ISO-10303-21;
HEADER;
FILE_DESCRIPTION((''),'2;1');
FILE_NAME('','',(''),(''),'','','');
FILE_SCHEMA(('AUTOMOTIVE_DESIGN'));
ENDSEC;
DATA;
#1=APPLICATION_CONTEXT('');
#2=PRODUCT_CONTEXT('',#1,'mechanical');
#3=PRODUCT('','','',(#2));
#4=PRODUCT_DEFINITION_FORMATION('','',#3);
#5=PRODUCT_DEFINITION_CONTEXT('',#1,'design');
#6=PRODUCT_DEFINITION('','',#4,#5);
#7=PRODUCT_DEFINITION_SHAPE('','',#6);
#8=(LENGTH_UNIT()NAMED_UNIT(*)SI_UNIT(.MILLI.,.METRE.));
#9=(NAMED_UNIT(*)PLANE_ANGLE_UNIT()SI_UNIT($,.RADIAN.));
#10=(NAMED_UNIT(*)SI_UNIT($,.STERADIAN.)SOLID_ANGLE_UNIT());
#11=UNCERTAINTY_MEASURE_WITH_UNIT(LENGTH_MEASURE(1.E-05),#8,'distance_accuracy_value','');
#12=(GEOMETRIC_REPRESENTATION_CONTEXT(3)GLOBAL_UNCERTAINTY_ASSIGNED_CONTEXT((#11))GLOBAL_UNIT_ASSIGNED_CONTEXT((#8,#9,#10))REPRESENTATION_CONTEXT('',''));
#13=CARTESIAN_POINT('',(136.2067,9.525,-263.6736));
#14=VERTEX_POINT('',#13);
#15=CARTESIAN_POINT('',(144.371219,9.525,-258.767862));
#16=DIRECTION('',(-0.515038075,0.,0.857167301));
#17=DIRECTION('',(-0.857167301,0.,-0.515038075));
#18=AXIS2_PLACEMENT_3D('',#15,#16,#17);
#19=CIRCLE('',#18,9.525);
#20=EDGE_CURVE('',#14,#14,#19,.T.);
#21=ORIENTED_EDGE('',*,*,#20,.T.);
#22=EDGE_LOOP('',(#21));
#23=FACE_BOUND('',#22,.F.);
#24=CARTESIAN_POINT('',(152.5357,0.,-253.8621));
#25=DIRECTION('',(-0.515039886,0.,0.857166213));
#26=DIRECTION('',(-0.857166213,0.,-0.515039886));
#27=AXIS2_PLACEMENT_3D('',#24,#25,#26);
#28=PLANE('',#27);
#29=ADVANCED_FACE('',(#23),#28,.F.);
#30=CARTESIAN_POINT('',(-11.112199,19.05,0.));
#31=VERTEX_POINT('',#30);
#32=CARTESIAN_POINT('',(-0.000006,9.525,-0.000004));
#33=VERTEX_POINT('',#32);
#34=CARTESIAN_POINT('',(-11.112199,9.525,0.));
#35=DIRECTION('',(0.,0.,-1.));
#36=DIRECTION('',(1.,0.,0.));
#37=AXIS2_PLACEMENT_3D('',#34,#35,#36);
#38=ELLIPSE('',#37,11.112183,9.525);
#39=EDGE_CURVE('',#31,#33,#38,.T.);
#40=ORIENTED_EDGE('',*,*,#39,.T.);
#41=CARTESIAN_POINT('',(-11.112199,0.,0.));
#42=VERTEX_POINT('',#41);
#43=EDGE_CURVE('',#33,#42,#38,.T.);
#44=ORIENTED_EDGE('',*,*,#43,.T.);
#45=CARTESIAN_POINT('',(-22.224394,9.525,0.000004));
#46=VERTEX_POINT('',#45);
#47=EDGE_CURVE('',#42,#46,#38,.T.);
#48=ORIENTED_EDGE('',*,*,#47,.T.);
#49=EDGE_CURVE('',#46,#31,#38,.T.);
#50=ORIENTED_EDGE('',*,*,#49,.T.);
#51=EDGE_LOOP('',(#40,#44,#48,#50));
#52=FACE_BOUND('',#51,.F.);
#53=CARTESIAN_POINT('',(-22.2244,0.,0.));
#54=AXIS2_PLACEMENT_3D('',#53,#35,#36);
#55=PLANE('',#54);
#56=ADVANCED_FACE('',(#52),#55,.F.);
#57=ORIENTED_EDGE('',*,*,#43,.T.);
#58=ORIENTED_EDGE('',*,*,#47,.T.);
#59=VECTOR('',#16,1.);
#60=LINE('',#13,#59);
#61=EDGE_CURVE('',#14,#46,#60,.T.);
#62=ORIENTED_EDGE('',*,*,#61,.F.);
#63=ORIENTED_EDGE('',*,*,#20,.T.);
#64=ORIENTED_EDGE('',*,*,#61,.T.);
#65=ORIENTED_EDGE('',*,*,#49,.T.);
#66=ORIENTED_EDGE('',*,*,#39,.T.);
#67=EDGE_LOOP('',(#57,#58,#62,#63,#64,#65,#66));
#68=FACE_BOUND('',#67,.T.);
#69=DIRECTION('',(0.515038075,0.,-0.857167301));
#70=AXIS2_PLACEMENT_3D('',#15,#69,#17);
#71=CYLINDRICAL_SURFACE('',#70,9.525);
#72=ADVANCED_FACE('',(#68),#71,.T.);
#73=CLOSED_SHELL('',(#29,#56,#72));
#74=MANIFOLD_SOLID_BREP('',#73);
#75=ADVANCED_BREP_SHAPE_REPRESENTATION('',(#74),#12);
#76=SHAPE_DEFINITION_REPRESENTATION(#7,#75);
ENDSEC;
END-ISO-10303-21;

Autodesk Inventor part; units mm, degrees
ref_plane "YZ Plane" through (0, 0, 0) normal (1, 0, 0) x (0, 1, 0)
ref_plane "XZ Plane" through (0, 0, 0) normal (0, 1, 0) x (-1, 0, 0)
ref_plane "XY Plane" through (0, 0, 0) normal (0, 0, 1) x (1, 0, 0)
sketch "Sketch2" plane through (0, 0, 0) normal (0, 1, 0) x (-1, 0, 0)
  line L0 (0, 0) -> (-152.5357, -253.8621)
  line L1 (-136.2067, -263.6736) -> (22.2244, 0)
  line L2 (-136.2067, -263.6736) -> (150.1458, -263.6736) construction
  line L3 (22.2244, 0) -> (0, 0)
  line L4 (-152.5357, -253.8621) -> (-136.2067, -263.6736)
  dimension "d9" = 296.164
  dimension "d12" = 59
  dimension "d13" = 19.05
extrude "Extrusion1" add sketch "Sketch2" along normal blind 19.05
sketch "Sketch3" plane through (136.2067, 0, -263.6736) normal (0.5150381, 0, -0.8571673) x (-0.8571673, 0, -0.5150381)
  line L0 (0, 0) -> (0, 19.05) projected
  line L1 (0, 0) -> (-19.05, 0)
  line L2 (-19.05, 0) -> (-19.05, 19.05)
  line L3 (-19.05, 19.05) -> (0, 19.05)
  line L4 (0, 19.05) -> (0, 0)
  circle A0 centre (-9.525, 9.525) radius 9.525
  dimension "d18" = 19.05
extrude "Extrusion2" cut sketch "Sketch3" against normal through all contours L1 A0 L0 | A0 L3 L0 | L1 L2 A0 | A0 L2 L3
properties part number "leg"
